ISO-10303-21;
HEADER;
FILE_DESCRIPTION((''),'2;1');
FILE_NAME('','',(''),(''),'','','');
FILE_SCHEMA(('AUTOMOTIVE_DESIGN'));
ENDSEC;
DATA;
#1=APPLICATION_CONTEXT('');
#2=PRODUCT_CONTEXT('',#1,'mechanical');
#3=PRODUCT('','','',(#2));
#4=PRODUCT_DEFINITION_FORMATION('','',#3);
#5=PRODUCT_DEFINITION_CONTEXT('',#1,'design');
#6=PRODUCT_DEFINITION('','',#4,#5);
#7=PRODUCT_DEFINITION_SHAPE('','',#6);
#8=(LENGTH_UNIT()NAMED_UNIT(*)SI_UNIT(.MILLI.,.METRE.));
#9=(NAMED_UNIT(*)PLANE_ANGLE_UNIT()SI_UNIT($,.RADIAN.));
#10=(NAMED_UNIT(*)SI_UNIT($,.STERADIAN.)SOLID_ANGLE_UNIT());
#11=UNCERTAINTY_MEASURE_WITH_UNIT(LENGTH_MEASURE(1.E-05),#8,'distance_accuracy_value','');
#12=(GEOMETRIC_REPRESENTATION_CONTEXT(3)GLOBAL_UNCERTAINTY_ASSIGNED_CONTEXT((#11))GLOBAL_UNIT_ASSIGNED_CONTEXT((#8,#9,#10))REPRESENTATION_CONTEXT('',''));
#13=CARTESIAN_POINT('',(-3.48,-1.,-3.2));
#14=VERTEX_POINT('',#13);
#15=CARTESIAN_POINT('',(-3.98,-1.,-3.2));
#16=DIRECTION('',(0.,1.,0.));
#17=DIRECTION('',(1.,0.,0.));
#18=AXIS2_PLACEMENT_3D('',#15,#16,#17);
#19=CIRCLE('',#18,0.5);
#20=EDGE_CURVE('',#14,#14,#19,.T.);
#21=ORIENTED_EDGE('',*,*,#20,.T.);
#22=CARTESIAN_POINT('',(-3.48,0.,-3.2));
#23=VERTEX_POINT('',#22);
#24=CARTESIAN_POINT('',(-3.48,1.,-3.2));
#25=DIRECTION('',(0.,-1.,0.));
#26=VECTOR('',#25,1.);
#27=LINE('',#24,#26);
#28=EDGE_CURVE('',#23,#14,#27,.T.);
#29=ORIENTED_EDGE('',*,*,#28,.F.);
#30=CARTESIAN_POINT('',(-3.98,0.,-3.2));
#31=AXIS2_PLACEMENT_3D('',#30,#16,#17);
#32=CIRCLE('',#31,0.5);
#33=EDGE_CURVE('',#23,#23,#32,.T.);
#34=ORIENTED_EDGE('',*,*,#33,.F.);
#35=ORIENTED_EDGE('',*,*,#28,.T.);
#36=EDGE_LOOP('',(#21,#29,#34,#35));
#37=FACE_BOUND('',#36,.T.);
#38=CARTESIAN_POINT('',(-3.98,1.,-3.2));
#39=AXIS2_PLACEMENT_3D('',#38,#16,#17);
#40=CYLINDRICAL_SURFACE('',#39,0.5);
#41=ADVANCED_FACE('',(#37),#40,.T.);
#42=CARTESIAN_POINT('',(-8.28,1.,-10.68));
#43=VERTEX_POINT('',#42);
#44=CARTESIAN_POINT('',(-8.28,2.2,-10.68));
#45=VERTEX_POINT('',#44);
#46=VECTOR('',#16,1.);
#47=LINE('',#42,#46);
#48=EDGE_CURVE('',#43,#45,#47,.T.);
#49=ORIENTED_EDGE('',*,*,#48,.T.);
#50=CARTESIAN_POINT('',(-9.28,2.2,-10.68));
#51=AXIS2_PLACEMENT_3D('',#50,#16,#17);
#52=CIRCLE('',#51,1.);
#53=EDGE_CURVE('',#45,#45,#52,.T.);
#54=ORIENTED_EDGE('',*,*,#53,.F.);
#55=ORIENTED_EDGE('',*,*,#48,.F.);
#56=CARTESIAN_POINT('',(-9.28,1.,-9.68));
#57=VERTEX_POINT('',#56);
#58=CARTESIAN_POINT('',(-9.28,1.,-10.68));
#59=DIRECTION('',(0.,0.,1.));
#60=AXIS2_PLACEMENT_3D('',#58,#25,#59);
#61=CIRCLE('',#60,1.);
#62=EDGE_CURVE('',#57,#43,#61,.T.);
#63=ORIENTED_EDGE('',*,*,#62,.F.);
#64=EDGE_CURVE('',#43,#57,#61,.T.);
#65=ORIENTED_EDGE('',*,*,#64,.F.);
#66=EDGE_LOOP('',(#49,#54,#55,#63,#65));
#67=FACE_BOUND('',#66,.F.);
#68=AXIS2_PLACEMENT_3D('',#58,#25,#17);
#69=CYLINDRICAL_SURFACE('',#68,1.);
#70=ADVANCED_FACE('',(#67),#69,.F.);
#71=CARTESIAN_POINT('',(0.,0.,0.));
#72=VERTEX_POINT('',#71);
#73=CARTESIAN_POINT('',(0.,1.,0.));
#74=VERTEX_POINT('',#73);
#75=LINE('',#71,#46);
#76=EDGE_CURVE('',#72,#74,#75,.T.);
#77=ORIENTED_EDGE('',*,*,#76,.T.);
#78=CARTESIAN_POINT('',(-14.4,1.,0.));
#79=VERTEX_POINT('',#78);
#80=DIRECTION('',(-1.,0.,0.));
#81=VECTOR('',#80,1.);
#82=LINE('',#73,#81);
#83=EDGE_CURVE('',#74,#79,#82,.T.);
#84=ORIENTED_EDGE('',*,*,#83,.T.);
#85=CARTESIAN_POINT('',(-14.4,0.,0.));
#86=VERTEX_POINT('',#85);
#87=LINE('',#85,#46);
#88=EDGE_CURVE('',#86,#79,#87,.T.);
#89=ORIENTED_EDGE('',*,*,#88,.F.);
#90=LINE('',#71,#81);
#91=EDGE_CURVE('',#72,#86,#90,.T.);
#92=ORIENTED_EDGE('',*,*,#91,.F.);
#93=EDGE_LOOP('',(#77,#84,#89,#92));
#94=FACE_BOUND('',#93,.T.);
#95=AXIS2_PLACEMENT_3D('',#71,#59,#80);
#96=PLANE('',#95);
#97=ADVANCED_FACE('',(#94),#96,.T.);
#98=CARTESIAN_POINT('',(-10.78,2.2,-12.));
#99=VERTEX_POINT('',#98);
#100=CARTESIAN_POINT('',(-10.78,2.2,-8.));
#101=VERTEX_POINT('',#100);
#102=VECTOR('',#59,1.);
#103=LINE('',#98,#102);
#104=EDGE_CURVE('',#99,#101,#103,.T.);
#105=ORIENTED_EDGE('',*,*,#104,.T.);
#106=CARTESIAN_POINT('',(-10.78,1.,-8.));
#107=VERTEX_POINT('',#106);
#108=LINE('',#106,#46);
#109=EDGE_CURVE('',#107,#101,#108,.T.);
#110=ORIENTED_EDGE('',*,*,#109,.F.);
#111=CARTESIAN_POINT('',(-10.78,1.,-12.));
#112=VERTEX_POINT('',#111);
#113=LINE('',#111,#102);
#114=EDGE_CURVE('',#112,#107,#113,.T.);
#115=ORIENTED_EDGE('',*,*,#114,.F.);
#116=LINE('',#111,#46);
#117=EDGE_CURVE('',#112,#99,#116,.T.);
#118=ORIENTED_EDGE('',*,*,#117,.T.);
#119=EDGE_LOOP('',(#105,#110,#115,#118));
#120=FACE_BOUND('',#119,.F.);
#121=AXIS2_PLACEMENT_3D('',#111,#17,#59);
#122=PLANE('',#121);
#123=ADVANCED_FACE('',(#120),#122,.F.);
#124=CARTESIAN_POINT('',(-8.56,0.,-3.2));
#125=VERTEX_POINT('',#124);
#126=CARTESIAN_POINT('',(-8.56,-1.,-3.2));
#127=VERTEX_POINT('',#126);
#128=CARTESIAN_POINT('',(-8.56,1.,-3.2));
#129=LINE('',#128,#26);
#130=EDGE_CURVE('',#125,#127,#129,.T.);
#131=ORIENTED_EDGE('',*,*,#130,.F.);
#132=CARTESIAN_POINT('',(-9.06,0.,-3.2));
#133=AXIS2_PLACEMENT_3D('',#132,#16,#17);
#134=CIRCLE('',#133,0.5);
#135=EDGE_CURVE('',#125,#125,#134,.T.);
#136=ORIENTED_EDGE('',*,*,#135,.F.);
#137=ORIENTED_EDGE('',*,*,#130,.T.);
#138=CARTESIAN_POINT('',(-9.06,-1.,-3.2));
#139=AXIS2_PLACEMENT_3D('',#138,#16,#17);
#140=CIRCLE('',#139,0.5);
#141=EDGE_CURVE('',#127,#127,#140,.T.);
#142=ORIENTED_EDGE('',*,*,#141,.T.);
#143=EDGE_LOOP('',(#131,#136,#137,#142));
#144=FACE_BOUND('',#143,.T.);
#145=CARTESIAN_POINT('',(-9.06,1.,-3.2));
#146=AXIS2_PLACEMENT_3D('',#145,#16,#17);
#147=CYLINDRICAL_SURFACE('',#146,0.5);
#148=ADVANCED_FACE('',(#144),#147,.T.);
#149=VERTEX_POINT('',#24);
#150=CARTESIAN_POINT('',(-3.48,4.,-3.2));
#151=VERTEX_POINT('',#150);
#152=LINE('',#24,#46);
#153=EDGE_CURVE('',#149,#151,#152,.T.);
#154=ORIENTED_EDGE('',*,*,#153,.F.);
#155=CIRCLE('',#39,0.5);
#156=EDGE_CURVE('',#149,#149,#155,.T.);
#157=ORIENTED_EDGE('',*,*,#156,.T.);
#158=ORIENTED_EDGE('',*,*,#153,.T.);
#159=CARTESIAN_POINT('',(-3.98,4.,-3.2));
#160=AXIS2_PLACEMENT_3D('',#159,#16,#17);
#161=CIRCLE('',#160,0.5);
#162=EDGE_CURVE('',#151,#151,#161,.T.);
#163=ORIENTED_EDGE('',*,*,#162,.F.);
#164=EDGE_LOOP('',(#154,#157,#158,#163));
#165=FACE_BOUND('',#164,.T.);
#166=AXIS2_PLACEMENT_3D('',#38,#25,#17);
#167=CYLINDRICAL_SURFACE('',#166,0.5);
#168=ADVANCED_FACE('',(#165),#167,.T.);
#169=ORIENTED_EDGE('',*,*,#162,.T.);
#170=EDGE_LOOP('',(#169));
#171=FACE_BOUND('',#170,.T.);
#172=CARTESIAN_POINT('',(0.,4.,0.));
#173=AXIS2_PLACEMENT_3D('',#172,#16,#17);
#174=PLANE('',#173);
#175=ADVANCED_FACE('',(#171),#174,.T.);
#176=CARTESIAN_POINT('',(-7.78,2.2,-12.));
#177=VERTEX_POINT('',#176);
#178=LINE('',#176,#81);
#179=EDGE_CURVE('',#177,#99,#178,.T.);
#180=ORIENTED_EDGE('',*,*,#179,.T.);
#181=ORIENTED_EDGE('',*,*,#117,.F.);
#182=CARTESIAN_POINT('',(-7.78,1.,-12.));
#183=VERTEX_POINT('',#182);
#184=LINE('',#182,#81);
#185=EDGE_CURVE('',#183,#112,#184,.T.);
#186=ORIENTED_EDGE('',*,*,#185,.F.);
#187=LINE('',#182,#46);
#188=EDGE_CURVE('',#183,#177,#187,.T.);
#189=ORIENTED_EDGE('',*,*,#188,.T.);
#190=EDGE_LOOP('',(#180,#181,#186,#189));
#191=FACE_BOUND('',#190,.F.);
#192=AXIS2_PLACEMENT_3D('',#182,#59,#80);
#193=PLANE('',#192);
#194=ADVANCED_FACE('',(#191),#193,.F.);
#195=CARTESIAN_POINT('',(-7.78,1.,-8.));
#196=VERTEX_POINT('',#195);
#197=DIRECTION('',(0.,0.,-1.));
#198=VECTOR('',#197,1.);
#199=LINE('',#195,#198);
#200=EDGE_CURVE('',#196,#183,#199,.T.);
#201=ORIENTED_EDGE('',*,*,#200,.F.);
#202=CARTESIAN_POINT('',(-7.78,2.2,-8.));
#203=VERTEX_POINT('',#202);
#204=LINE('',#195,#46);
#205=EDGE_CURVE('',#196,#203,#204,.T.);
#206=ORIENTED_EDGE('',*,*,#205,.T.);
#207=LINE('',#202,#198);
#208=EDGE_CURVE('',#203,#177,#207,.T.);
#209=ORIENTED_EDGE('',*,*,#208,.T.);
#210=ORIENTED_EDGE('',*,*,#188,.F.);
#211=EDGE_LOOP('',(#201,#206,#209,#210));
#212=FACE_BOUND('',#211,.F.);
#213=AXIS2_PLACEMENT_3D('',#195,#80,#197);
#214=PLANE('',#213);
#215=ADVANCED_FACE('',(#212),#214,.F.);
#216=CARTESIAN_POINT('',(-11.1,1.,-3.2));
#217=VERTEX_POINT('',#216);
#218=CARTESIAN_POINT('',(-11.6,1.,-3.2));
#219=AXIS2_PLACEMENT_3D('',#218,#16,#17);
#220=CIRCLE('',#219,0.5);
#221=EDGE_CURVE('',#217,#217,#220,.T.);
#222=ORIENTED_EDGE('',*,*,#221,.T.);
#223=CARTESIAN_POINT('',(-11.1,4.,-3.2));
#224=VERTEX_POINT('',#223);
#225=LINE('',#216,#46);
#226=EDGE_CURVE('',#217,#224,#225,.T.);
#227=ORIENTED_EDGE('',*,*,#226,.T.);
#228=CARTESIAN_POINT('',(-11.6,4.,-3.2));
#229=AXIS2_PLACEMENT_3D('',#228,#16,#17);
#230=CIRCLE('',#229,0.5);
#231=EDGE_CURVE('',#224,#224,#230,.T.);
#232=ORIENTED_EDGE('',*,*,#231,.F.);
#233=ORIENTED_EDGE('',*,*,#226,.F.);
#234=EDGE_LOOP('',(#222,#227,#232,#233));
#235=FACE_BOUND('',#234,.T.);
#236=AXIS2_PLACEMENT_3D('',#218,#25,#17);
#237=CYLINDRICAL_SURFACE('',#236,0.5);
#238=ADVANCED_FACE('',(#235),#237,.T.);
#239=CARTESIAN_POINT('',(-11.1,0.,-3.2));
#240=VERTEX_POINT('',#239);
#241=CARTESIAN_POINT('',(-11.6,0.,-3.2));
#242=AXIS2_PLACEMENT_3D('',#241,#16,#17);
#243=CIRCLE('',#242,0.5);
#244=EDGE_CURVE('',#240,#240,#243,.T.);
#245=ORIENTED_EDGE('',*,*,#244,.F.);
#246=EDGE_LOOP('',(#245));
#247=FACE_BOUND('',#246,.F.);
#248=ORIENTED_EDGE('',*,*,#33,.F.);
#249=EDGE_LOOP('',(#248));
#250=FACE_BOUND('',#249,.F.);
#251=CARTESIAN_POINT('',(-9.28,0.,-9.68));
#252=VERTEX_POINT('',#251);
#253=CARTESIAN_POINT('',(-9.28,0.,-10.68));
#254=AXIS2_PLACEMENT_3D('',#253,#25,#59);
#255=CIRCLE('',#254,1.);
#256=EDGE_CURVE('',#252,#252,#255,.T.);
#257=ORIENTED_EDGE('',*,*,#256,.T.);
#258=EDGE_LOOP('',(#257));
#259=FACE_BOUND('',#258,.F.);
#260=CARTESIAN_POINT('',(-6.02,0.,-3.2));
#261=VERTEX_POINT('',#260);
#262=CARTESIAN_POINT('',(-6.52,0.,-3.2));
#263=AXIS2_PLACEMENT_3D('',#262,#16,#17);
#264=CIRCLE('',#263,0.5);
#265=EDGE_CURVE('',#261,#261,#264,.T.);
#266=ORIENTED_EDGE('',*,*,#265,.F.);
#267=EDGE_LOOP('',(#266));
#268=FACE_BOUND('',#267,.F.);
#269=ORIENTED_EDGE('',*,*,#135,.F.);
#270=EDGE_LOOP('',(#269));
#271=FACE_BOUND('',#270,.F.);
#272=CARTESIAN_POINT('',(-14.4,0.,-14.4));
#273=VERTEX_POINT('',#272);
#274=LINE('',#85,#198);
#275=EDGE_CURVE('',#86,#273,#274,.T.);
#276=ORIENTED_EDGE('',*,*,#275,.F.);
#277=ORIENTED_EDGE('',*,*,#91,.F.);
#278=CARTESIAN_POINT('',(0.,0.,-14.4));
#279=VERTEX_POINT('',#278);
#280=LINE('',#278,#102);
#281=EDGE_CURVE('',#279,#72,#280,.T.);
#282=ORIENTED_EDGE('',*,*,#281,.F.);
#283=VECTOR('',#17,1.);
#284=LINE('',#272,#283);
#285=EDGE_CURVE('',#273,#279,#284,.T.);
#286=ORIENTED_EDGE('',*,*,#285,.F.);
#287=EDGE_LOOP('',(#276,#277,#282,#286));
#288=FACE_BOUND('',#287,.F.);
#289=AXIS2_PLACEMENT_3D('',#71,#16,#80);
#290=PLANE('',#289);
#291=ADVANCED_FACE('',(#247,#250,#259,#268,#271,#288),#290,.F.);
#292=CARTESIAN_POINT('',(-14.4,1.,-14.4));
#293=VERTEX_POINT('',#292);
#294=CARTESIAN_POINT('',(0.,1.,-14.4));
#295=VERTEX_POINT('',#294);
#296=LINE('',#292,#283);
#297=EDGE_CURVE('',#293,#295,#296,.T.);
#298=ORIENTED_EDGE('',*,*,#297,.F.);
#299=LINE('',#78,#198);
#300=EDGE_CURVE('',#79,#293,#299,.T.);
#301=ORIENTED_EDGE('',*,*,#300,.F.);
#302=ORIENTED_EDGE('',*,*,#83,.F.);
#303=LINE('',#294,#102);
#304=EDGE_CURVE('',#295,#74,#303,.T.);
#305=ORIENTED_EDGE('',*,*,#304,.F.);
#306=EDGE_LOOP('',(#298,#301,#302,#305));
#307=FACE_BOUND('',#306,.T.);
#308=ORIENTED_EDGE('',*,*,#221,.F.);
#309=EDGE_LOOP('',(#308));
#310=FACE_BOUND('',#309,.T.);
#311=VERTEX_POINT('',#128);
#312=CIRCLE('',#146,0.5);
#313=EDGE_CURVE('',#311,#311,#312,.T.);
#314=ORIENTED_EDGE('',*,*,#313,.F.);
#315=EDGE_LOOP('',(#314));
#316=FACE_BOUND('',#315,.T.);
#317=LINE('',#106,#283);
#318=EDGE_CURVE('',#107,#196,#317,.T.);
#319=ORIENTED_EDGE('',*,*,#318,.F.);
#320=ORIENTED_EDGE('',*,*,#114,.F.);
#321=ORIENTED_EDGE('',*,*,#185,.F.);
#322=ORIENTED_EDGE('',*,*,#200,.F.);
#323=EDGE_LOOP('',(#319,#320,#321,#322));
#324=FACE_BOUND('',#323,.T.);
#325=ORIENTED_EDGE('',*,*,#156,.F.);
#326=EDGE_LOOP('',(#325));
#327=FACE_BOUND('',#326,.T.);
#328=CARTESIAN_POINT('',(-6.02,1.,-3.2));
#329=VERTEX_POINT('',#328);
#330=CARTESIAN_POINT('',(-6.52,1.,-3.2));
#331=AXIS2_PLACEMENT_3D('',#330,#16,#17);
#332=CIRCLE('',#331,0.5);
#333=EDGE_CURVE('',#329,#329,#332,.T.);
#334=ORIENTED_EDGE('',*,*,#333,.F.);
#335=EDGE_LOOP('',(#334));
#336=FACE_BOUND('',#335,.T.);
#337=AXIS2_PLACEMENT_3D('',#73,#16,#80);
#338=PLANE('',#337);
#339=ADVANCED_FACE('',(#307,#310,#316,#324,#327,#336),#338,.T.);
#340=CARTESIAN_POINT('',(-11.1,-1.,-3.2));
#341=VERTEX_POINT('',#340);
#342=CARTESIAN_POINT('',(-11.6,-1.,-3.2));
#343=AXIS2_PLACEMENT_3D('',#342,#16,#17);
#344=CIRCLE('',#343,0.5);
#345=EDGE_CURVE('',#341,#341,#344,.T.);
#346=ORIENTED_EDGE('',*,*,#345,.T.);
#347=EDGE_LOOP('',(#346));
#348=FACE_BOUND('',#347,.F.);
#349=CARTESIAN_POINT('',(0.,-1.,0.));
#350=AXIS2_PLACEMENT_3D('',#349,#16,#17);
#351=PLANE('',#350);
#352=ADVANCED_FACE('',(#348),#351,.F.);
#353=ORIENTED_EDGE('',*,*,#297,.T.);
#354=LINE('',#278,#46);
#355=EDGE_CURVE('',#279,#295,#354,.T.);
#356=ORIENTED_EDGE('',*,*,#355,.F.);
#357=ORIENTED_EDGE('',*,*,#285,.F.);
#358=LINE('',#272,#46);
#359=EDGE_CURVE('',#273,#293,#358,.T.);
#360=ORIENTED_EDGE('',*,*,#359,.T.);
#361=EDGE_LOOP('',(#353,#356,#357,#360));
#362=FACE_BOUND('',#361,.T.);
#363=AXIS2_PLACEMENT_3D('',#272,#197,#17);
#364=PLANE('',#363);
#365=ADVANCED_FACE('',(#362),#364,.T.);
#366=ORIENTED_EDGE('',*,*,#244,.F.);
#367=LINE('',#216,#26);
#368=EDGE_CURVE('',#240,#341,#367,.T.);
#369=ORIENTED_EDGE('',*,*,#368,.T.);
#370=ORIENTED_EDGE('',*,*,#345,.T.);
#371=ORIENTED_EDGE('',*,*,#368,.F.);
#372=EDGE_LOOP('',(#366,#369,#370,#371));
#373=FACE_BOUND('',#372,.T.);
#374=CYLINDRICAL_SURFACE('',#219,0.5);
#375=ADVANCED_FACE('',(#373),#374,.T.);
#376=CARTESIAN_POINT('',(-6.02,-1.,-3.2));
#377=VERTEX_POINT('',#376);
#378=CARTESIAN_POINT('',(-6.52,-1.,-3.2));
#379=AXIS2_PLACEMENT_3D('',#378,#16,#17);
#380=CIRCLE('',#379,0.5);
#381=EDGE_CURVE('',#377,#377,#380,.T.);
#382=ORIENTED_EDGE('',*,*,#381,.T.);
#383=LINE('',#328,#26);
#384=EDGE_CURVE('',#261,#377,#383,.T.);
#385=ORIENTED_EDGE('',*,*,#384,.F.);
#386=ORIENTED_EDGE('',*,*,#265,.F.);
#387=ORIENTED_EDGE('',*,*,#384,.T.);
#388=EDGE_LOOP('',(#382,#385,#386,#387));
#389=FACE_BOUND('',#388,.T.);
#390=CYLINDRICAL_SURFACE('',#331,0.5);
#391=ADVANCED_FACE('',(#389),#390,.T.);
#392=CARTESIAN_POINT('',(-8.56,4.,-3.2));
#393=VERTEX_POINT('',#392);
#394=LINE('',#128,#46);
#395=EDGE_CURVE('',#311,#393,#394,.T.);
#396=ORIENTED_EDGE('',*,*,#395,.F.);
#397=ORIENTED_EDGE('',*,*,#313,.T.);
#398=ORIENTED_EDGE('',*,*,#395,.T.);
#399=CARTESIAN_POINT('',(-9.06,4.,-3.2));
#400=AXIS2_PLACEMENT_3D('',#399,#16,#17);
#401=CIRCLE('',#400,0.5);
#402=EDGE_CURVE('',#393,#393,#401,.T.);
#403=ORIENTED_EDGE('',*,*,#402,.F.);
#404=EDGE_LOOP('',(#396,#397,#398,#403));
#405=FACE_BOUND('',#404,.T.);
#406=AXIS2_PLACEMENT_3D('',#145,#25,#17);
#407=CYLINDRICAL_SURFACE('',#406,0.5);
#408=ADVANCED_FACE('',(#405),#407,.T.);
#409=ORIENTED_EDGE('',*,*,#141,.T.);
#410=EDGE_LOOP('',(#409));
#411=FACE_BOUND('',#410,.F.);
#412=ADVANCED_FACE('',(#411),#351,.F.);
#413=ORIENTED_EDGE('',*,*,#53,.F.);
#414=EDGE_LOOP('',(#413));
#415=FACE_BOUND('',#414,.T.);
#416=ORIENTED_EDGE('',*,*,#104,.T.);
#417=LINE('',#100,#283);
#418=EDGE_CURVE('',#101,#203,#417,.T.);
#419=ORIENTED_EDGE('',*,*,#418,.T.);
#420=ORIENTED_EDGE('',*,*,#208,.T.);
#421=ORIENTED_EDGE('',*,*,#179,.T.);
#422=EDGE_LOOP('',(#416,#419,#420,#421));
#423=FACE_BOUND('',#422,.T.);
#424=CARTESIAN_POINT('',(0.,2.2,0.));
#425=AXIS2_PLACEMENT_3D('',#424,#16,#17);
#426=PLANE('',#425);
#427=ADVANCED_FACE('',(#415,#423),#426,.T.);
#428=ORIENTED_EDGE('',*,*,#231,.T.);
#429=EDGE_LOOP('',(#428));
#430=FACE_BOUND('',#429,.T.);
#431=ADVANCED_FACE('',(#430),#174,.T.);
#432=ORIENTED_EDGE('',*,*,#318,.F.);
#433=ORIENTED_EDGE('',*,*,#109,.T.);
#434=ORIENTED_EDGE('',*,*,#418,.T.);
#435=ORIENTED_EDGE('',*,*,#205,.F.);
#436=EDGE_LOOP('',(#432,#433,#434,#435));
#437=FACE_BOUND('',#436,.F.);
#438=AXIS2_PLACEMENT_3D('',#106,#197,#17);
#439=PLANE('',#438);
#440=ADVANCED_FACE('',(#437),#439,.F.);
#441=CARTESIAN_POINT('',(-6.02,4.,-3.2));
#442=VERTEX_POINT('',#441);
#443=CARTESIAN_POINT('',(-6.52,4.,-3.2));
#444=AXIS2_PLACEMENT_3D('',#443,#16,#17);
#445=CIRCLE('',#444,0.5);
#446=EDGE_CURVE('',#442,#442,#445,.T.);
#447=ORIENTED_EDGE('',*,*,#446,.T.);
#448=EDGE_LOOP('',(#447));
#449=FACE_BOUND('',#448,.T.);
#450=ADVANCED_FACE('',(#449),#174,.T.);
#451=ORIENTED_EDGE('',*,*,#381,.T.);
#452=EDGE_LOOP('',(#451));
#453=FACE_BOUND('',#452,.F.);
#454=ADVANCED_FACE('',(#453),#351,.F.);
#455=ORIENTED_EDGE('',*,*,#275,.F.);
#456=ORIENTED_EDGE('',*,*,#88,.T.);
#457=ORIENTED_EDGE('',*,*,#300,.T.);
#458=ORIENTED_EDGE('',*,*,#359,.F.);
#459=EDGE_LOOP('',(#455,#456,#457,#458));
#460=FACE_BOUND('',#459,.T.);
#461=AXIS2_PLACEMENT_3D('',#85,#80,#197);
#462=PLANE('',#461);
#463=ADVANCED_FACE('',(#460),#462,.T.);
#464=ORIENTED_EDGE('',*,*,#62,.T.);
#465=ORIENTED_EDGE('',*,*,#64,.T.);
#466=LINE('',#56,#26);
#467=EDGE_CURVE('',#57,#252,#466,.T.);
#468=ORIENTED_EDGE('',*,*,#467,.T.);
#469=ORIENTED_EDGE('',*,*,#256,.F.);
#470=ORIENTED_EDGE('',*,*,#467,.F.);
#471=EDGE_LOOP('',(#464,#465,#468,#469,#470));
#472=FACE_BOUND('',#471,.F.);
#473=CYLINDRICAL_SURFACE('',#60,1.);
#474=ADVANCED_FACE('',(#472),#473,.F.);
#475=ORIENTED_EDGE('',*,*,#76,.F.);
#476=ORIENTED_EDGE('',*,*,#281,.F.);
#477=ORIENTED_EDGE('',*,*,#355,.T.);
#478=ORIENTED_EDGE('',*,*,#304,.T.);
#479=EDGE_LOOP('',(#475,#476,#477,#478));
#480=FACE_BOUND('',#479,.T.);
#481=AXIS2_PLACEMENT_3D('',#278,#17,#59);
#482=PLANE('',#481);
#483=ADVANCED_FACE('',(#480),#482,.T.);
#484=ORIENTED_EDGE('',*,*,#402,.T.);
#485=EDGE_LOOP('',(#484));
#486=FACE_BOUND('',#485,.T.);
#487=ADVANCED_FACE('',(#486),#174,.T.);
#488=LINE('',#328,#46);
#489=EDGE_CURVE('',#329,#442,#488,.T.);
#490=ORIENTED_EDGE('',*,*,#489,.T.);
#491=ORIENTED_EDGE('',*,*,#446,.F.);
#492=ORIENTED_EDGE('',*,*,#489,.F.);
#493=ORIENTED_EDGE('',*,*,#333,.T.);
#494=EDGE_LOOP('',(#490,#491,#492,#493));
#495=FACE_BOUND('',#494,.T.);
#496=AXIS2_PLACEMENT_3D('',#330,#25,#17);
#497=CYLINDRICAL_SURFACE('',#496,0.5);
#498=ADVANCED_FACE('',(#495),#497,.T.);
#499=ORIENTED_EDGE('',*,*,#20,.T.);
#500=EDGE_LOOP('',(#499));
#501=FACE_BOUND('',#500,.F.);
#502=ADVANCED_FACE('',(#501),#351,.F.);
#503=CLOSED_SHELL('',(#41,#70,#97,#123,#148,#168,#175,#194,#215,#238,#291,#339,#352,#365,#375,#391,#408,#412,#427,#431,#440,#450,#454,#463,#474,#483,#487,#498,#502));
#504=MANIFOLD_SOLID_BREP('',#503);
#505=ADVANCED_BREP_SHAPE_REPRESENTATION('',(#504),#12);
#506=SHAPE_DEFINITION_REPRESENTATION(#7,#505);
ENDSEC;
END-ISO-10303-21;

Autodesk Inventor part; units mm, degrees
ref_plane "YZ Plane" through (0, 0, 0) normal (1, 0, 0) x (0, 1, 0)
ref_plane "XZ Plane" through (0, 0, 0) normal (0, 1, 0) x (-1, 0, 0)
ref_plane "XY Plane" through (0, 0, 0) normal (0, 0, 1) x (1, 0, 0)
sketch "Skizze1" plane through (0, 0, 0) normal (0, 1, 0) x (-1, 0, 0)
  line L0 (0, 0) -> (14.4, 0)
  line L1 (14.4, 0) -> (14.4, -14.4)
  line L2 (14.4, -14.4) -> (0, -14.4)
  line L3 (0, -14.4) -> (0, 0)
  dimension "d0" = 14.4
  dimension "d1" = 14.4
extrude "Extrusion1" add sketch "Skizze1" along normal blind 1
sketch "Skizze2" plane through (0, 1, 0) normal (0, 1, 0) x (1, 0, 0)
  line L0 (0, 14.4) -> (-14.4, 14.4) projected
  line L1 (0, 0) -> (0, 14.4) projected
  point P0 (-9.28, 10.68)
  dimension "d4" = 3.72
  dimension "d5" = 9.28
hole "Bohrung1" at (-9.28, 1, -10.68) direction (0, -1, 0) diameter 2 end up to surface
sketch "Skizze3" plane through (0, 1, 0) normal (0, 1, 0) x (1, 0, 0)
  circle A0 centre (-9.28, 10.68) radius 1 projected
  line L0 (-14.4, 0) -> (0, 0) projected
  line L1 (0, 0) -> (0, 14.4) projected
  line L2 (0, 14.4) -> (-14.4, 14.4) projected
  line L3 (-14.4, 14.4) -> (-14.4, 0) projected
  line L4 (-10.78, 8) -> (-7.78, 8)
  line L5 (-7.78, 8) -> (-7.78, 12)
  line L6 (-7.78, 12) -> (-10.78, 12)
  line L7 (-10.78, 12) -> (-10.78, 8)
  dimension "d13" = 4
  dimension "d14" = 3
  dimension "d15" = 1.5
  dimension "d16" = 1.32
extrude "Extrusion2" add sketch "Skizze3" along normal blind 1.2 contours L7 L6 L5 L4
sketch "Skizze4" plane through (0, 1, 0) normal (0, 1, 0) x (1, 0, 0)
  line L0 (-14.4, 14.4) -> (-14.4, 0) construction
  line L1 (-14.4, 3.2) -> (0, 3.2) construction
  line L2 (0, 0) -> (0, 14.4) construction
  line L3 (-14.4, 0) -> (0, 0) projected
  circle A0 centre (-11.6, 3.2) radius 0.5
  circle A1 centre (-9.06, 3.2) radius 0.5
  circle A2 centre (-6.52, 3.2) radius 0.5
  circle A3 centre (-3.98, 3.2) radius 0.5
  dimension "d19" = 3.2
  dimension "d20" = 2.8
  dimension "d21" = 2.54
  dimension "d22" = 2.54
  dimension "d23" = 2.54
  dimension "d24" = 1
  dimension "d25" = 1
  dimension "d26" = 1
  dimension "d27" = 1
extrude "Extrusion3" add sketch "Skizze4" along normal blind 3 and the other way blind 2
properties part number "Mic_breakout" material "ABS-Kunststoff"
